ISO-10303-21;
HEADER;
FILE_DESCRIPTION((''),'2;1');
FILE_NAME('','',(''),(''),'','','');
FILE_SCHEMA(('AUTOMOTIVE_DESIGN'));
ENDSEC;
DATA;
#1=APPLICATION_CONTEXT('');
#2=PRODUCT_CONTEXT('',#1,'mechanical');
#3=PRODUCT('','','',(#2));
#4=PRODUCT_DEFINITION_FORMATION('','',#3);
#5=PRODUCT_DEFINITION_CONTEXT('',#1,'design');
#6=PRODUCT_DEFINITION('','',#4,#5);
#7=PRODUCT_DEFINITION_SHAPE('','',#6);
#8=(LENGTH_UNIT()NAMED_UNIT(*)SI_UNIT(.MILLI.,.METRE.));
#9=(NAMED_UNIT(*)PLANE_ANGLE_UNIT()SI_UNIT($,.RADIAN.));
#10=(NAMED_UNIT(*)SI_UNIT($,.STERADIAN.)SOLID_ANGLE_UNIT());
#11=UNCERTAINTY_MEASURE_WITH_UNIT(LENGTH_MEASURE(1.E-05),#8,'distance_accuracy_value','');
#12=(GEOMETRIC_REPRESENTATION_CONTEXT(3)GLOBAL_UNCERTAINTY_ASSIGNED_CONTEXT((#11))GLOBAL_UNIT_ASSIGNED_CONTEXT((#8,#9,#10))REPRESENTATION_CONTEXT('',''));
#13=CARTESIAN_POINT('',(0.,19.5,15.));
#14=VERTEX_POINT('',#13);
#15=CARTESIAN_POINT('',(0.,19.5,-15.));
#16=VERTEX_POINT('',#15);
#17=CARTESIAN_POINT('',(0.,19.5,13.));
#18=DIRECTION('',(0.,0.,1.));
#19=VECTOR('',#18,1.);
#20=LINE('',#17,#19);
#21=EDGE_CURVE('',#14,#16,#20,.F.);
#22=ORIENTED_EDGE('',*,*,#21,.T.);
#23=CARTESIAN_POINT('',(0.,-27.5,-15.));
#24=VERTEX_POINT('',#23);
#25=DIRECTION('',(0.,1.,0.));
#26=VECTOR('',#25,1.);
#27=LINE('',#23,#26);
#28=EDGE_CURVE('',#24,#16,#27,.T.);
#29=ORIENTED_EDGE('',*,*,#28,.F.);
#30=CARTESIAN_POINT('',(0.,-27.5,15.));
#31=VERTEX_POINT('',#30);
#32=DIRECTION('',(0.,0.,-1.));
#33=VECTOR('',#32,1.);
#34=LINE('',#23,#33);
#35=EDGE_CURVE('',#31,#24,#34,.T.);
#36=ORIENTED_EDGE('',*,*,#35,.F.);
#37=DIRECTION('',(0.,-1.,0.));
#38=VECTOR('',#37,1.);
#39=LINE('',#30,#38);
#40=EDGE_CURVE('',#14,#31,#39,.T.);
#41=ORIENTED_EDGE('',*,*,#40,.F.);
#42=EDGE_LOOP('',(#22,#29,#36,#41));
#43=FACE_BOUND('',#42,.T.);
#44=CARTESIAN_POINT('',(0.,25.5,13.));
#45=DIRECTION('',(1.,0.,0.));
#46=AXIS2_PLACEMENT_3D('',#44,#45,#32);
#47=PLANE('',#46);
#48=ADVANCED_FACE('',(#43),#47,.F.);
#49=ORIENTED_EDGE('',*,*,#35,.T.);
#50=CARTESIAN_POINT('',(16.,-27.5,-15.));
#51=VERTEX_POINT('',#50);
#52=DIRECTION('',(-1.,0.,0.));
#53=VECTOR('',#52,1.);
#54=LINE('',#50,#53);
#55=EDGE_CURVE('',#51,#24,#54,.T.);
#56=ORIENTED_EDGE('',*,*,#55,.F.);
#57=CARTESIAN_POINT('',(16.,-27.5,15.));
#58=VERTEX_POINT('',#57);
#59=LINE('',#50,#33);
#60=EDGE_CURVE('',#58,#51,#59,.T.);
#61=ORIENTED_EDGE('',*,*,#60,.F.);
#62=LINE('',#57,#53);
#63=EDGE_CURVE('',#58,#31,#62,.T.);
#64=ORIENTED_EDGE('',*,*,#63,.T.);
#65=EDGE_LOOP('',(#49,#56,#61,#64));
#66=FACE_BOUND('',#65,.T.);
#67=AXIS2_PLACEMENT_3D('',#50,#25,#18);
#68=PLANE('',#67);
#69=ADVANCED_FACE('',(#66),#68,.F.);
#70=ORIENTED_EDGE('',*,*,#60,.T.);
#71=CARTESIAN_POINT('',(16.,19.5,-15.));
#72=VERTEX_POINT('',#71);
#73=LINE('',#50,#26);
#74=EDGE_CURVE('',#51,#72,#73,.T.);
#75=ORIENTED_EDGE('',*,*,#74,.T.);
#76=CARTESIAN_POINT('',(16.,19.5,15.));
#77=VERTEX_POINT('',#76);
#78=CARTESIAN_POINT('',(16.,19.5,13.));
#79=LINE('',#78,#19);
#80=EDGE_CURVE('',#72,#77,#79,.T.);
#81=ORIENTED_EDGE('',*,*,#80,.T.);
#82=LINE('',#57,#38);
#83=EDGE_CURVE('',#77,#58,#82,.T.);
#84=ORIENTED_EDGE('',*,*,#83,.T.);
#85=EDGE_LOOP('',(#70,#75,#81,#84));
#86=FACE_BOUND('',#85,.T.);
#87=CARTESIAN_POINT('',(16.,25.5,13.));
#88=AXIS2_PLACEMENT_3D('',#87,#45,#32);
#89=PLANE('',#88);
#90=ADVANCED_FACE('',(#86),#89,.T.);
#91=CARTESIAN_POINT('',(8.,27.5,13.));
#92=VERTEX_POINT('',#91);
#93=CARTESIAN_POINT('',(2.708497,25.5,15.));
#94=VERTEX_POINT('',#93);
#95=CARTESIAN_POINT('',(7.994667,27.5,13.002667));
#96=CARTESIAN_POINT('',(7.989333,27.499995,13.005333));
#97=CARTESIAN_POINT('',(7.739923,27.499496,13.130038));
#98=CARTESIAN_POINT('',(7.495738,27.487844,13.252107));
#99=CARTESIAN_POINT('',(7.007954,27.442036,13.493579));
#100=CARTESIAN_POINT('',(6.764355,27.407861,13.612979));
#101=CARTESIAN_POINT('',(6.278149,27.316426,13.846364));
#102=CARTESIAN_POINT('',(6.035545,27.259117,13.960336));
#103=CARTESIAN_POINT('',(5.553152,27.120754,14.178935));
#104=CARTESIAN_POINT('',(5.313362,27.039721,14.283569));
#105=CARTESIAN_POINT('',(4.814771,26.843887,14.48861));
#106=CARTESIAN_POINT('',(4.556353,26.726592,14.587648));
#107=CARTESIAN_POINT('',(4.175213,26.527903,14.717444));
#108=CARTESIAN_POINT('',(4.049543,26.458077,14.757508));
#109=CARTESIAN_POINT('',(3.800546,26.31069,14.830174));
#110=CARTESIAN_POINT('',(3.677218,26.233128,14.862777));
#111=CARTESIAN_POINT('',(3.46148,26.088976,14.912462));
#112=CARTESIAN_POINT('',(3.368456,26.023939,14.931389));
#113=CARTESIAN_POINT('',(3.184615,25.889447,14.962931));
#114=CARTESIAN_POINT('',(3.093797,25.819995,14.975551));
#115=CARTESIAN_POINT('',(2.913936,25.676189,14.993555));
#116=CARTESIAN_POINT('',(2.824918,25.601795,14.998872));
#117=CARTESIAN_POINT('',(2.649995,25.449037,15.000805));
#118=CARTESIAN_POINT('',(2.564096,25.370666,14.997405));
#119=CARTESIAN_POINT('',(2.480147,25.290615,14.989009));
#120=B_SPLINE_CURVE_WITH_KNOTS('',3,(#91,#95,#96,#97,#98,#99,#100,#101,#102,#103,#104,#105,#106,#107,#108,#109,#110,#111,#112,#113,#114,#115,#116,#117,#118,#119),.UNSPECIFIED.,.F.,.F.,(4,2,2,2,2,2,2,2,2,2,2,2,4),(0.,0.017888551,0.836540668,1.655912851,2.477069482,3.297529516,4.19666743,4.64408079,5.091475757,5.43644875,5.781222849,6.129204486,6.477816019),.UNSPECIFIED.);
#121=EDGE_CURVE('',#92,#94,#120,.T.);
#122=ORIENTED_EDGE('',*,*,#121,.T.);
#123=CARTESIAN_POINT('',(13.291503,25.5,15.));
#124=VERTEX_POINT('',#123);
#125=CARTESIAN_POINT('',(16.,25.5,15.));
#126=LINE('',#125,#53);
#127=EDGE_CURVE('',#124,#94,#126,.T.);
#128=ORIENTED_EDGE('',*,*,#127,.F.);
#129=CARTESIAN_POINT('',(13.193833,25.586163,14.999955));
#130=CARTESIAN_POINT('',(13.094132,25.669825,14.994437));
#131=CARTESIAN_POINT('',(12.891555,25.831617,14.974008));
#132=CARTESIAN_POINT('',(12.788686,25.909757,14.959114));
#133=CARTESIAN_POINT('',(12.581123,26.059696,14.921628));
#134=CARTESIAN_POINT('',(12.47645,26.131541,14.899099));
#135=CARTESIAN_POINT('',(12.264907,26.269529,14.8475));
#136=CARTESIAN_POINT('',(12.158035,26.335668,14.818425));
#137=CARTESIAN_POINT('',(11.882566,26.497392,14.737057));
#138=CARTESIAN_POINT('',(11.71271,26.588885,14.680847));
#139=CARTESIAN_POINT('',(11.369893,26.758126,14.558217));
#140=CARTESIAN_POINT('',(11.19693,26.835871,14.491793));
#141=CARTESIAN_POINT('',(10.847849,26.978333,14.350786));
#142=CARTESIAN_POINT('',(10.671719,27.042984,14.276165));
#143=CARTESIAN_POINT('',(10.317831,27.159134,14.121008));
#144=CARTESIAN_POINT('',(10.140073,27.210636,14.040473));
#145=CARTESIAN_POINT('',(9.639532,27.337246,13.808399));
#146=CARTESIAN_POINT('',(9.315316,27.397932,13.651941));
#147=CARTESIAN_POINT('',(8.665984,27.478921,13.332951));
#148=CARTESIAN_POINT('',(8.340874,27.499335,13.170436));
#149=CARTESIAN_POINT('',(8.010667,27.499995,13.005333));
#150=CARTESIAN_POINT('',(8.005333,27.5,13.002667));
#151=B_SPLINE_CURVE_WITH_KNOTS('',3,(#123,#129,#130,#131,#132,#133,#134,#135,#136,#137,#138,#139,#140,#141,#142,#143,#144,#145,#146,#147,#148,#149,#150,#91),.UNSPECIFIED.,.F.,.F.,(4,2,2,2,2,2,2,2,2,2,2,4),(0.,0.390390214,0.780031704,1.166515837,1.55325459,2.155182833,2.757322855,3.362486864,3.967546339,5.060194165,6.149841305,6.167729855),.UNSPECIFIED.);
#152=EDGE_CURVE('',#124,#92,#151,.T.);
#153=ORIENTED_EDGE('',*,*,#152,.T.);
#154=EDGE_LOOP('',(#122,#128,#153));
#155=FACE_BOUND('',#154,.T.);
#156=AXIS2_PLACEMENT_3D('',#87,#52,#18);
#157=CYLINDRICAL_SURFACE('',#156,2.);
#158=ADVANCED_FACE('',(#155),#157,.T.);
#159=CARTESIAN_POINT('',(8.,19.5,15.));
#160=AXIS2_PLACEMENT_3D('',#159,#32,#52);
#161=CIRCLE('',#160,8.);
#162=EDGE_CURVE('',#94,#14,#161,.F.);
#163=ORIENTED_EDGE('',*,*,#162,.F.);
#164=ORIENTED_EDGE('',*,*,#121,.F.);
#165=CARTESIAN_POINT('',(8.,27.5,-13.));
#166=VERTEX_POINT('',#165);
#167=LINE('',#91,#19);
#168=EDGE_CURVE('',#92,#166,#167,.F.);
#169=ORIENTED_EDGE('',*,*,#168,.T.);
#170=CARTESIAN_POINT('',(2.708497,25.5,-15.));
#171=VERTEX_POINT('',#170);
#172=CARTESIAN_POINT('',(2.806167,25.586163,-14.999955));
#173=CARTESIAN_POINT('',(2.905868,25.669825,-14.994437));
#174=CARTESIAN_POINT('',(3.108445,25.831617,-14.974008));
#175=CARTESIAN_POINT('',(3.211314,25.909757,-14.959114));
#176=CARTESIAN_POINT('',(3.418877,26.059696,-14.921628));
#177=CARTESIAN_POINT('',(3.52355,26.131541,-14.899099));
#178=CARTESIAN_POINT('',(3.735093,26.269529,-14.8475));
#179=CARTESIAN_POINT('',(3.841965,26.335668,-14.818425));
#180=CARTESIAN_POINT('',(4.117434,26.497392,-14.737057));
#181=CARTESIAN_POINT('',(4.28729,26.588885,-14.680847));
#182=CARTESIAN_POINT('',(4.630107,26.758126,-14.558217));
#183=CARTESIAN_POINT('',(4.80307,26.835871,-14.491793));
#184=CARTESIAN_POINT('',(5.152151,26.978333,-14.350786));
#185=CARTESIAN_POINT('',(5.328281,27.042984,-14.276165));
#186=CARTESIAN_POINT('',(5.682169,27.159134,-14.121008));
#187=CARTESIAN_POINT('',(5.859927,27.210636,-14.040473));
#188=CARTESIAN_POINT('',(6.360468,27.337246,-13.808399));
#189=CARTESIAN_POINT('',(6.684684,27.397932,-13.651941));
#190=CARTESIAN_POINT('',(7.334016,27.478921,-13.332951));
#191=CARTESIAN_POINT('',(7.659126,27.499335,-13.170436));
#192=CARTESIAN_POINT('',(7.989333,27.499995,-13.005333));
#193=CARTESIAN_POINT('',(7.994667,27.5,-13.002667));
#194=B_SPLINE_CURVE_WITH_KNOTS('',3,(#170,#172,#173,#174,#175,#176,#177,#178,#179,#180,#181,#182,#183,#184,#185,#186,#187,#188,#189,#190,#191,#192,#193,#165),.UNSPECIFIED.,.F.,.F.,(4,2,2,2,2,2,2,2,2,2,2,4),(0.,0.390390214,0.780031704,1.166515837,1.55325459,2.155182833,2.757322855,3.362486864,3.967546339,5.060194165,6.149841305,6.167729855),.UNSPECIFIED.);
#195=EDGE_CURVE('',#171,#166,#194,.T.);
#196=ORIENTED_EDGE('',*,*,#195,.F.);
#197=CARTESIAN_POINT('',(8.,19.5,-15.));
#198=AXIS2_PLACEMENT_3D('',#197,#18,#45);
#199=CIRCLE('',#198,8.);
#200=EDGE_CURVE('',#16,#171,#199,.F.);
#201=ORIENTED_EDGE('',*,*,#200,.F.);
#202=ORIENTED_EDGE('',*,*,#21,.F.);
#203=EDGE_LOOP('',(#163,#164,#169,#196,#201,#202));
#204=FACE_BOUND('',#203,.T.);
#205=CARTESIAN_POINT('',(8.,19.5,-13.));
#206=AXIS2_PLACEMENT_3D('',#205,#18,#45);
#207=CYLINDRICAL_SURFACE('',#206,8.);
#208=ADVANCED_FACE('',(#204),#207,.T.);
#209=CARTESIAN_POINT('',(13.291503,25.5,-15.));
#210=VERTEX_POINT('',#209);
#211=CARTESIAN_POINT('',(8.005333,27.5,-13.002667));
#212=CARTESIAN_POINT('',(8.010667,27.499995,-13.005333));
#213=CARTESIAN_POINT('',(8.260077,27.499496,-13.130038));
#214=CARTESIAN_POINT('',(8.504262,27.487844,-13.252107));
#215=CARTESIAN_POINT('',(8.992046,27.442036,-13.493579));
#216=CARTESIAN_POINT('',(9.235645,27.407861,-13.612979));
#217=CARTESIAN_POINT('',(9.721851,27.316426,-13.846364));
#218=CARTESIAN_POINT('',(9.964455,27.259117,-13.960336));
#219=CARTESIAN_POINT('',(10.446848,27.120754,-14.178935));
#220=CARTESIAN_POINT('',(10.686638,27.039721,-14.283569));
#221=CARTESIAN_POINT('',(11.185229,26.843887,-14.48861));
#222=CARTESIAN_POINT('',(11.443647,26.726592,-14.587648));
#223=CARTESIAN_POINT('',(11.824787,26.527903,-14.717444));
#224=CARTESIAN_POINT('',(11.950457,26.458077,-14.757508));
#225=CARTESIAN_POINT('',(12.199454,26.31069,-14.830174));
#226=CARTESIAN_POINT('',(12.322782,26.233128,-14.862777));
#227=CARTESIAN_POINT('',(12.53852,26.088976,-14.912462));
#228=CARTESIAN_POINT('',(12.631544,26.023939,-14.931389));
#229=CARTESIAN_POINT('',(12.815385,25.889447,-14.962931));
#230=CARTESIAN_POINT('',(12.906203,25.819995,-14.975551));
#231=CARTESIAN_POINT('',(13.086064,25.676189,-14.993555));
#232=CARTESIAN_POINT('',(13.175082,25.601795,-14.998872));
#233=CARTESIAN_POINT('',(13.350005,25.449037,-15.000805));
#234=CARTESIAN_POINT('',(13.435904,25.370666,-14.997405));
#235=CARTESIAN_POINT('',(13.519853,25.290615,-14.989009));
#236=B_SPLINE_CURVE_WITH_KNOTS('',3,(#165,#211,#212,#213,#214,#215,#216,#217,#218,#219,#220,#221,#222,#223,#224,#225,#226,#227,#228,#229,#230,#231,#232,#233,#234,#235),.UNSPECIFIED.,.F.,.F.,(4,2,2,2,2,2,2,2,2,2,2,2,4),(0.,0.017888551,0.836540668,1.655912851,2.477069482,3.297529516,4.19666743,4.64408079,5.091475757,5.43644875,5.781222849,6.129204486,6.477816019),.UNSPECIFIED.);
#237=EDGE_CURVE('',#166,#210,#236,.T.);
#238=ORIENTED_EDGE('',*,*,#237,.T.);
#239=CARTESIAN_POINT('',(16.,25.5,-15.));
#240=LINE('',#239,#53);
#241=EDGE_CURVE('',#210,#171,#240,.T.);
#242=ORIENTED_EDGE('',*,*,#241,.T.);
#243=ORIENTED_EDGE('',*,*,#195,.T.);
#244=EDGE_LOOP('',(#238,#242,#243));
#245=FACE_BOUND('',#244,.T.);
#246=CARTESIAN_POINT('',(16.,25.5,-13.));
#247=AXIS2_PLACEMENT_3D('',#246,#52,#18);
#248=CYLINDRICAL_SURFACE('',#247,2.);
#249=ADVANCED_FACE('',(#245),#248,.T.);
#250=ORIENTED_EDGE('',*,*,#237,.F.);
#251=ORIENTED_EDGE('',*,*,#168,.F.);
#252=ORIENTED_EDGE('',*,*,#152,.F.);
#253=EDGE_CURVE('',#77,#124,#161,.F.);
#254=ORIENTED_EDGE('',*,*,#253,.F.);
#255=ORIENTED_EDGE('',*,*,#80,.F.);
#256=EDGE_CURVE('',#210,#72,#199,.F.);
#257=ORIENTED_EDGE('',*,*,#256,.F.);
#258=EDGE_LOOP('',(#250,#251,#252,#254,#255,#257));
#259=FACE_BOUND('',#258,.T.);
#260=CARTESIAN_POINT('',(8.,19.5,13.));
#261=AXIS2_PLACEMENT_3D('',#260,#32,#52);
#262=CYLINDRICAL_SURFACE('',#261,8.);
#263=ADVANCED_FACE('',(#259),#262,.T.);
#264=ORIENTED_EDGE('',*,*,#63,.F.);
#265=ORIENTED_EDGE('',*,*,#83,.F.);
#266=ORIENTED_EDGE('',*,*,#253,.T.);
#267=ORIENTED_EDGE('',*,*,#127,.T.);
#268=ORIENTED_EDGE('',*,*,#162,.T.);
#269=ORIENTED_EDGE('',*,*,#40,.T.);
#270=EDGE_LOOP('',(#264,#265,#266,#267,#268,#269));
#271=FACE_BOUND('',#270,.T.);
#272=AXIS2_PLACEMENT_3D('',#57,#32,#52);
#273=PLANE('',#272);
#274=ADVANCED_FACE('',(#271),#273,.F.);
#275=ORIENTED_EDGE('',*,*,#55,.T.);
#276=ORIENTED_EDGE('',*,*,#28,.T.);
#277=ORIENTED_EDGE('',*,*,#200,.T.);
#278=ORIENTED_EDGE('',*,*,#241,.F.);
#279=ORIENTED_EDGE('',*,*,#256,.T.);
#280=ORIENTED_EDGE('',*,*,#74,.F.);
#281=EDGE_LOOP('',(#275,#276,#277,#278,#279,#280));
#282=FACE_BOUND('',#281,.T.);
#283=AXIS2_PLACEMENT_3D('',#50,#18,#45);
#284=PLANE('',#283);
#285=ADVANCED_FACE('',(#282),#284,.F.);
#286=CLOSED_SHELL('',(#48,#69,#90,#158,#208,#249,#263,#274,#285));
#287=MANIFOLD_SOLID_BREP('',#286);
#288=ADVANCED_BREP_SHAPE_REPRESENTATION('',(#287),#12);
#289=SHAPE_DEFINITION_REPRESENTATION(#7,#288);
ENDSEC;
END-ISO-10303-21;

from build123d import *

# Parameters (mm, degrees)
BOSS_EXTRUDE1_DEPTH = 16
FILLET6_R           = 8
FILLET7_R           = 8


with BuildPart() as part:
    # Sketch1 → Boss-Extrude1 (new body)
    with BuildSketch(Plane.YZ):
        with BuildLine():
            Line((-27.5, -15), (25.5, -15))
            ThreePointArc((25.5, -15), (26.914213562, -14.414213562), (27.5, -13))
            Line((27.5, -13), (27.5, 13))
            ThreePointArc((27.5, 13), (26.914213562, 14.414213562), (25.5, 15))
            Line((25.5, 15), (-27.5, 15))
            Line((-27.5, 15), (-27.5, -15))
        make_face()
    extrude(amount=BOSS_EXTRUDE1_DEPTH)

    # Fillet6
    # the kernel refuses this fillet: 8 mm, written as the material it takes off along each edge
    with BuildSketch(Plane(origin=(16, 27.5, -33), x_dir=(-1, 0, 0), z_dir=(0, 0, 1))) as fillet6_piece_1:
        with BuildLine():
            CenterArc((FILLET6_R, FILLET6_R), FILLET6_R, 180, 90)
            Line((0, FILLET6_R), (0, 0))
            Line((0, 0), (FILLET6_R, 0))
        make_face()
    extrude(amount=66, mode=Mode.SUBTRACT)

    # Fillet7
    # the kernel refuses this fillet: 8 mm, written as the material it takes off along each edge
    with BuildSketch(Plane(origin=(0, 27.5, -33), x_dir=(0, -1, 0), z_dir=(0, 0, 1))) as fillet7_piece_1:
        with BuildLine():
            CenterArc((FILLET7_R, FILLET7_R), FILLET7_R, 180, 90)
            Line((0, FILLET7_R), (0, 0))
            Line((0, 0), (FILLET7_R, 0))
        make_face()
    extrude(amount=66, mode=Mode.SUBTRACT)


solid = part.part
